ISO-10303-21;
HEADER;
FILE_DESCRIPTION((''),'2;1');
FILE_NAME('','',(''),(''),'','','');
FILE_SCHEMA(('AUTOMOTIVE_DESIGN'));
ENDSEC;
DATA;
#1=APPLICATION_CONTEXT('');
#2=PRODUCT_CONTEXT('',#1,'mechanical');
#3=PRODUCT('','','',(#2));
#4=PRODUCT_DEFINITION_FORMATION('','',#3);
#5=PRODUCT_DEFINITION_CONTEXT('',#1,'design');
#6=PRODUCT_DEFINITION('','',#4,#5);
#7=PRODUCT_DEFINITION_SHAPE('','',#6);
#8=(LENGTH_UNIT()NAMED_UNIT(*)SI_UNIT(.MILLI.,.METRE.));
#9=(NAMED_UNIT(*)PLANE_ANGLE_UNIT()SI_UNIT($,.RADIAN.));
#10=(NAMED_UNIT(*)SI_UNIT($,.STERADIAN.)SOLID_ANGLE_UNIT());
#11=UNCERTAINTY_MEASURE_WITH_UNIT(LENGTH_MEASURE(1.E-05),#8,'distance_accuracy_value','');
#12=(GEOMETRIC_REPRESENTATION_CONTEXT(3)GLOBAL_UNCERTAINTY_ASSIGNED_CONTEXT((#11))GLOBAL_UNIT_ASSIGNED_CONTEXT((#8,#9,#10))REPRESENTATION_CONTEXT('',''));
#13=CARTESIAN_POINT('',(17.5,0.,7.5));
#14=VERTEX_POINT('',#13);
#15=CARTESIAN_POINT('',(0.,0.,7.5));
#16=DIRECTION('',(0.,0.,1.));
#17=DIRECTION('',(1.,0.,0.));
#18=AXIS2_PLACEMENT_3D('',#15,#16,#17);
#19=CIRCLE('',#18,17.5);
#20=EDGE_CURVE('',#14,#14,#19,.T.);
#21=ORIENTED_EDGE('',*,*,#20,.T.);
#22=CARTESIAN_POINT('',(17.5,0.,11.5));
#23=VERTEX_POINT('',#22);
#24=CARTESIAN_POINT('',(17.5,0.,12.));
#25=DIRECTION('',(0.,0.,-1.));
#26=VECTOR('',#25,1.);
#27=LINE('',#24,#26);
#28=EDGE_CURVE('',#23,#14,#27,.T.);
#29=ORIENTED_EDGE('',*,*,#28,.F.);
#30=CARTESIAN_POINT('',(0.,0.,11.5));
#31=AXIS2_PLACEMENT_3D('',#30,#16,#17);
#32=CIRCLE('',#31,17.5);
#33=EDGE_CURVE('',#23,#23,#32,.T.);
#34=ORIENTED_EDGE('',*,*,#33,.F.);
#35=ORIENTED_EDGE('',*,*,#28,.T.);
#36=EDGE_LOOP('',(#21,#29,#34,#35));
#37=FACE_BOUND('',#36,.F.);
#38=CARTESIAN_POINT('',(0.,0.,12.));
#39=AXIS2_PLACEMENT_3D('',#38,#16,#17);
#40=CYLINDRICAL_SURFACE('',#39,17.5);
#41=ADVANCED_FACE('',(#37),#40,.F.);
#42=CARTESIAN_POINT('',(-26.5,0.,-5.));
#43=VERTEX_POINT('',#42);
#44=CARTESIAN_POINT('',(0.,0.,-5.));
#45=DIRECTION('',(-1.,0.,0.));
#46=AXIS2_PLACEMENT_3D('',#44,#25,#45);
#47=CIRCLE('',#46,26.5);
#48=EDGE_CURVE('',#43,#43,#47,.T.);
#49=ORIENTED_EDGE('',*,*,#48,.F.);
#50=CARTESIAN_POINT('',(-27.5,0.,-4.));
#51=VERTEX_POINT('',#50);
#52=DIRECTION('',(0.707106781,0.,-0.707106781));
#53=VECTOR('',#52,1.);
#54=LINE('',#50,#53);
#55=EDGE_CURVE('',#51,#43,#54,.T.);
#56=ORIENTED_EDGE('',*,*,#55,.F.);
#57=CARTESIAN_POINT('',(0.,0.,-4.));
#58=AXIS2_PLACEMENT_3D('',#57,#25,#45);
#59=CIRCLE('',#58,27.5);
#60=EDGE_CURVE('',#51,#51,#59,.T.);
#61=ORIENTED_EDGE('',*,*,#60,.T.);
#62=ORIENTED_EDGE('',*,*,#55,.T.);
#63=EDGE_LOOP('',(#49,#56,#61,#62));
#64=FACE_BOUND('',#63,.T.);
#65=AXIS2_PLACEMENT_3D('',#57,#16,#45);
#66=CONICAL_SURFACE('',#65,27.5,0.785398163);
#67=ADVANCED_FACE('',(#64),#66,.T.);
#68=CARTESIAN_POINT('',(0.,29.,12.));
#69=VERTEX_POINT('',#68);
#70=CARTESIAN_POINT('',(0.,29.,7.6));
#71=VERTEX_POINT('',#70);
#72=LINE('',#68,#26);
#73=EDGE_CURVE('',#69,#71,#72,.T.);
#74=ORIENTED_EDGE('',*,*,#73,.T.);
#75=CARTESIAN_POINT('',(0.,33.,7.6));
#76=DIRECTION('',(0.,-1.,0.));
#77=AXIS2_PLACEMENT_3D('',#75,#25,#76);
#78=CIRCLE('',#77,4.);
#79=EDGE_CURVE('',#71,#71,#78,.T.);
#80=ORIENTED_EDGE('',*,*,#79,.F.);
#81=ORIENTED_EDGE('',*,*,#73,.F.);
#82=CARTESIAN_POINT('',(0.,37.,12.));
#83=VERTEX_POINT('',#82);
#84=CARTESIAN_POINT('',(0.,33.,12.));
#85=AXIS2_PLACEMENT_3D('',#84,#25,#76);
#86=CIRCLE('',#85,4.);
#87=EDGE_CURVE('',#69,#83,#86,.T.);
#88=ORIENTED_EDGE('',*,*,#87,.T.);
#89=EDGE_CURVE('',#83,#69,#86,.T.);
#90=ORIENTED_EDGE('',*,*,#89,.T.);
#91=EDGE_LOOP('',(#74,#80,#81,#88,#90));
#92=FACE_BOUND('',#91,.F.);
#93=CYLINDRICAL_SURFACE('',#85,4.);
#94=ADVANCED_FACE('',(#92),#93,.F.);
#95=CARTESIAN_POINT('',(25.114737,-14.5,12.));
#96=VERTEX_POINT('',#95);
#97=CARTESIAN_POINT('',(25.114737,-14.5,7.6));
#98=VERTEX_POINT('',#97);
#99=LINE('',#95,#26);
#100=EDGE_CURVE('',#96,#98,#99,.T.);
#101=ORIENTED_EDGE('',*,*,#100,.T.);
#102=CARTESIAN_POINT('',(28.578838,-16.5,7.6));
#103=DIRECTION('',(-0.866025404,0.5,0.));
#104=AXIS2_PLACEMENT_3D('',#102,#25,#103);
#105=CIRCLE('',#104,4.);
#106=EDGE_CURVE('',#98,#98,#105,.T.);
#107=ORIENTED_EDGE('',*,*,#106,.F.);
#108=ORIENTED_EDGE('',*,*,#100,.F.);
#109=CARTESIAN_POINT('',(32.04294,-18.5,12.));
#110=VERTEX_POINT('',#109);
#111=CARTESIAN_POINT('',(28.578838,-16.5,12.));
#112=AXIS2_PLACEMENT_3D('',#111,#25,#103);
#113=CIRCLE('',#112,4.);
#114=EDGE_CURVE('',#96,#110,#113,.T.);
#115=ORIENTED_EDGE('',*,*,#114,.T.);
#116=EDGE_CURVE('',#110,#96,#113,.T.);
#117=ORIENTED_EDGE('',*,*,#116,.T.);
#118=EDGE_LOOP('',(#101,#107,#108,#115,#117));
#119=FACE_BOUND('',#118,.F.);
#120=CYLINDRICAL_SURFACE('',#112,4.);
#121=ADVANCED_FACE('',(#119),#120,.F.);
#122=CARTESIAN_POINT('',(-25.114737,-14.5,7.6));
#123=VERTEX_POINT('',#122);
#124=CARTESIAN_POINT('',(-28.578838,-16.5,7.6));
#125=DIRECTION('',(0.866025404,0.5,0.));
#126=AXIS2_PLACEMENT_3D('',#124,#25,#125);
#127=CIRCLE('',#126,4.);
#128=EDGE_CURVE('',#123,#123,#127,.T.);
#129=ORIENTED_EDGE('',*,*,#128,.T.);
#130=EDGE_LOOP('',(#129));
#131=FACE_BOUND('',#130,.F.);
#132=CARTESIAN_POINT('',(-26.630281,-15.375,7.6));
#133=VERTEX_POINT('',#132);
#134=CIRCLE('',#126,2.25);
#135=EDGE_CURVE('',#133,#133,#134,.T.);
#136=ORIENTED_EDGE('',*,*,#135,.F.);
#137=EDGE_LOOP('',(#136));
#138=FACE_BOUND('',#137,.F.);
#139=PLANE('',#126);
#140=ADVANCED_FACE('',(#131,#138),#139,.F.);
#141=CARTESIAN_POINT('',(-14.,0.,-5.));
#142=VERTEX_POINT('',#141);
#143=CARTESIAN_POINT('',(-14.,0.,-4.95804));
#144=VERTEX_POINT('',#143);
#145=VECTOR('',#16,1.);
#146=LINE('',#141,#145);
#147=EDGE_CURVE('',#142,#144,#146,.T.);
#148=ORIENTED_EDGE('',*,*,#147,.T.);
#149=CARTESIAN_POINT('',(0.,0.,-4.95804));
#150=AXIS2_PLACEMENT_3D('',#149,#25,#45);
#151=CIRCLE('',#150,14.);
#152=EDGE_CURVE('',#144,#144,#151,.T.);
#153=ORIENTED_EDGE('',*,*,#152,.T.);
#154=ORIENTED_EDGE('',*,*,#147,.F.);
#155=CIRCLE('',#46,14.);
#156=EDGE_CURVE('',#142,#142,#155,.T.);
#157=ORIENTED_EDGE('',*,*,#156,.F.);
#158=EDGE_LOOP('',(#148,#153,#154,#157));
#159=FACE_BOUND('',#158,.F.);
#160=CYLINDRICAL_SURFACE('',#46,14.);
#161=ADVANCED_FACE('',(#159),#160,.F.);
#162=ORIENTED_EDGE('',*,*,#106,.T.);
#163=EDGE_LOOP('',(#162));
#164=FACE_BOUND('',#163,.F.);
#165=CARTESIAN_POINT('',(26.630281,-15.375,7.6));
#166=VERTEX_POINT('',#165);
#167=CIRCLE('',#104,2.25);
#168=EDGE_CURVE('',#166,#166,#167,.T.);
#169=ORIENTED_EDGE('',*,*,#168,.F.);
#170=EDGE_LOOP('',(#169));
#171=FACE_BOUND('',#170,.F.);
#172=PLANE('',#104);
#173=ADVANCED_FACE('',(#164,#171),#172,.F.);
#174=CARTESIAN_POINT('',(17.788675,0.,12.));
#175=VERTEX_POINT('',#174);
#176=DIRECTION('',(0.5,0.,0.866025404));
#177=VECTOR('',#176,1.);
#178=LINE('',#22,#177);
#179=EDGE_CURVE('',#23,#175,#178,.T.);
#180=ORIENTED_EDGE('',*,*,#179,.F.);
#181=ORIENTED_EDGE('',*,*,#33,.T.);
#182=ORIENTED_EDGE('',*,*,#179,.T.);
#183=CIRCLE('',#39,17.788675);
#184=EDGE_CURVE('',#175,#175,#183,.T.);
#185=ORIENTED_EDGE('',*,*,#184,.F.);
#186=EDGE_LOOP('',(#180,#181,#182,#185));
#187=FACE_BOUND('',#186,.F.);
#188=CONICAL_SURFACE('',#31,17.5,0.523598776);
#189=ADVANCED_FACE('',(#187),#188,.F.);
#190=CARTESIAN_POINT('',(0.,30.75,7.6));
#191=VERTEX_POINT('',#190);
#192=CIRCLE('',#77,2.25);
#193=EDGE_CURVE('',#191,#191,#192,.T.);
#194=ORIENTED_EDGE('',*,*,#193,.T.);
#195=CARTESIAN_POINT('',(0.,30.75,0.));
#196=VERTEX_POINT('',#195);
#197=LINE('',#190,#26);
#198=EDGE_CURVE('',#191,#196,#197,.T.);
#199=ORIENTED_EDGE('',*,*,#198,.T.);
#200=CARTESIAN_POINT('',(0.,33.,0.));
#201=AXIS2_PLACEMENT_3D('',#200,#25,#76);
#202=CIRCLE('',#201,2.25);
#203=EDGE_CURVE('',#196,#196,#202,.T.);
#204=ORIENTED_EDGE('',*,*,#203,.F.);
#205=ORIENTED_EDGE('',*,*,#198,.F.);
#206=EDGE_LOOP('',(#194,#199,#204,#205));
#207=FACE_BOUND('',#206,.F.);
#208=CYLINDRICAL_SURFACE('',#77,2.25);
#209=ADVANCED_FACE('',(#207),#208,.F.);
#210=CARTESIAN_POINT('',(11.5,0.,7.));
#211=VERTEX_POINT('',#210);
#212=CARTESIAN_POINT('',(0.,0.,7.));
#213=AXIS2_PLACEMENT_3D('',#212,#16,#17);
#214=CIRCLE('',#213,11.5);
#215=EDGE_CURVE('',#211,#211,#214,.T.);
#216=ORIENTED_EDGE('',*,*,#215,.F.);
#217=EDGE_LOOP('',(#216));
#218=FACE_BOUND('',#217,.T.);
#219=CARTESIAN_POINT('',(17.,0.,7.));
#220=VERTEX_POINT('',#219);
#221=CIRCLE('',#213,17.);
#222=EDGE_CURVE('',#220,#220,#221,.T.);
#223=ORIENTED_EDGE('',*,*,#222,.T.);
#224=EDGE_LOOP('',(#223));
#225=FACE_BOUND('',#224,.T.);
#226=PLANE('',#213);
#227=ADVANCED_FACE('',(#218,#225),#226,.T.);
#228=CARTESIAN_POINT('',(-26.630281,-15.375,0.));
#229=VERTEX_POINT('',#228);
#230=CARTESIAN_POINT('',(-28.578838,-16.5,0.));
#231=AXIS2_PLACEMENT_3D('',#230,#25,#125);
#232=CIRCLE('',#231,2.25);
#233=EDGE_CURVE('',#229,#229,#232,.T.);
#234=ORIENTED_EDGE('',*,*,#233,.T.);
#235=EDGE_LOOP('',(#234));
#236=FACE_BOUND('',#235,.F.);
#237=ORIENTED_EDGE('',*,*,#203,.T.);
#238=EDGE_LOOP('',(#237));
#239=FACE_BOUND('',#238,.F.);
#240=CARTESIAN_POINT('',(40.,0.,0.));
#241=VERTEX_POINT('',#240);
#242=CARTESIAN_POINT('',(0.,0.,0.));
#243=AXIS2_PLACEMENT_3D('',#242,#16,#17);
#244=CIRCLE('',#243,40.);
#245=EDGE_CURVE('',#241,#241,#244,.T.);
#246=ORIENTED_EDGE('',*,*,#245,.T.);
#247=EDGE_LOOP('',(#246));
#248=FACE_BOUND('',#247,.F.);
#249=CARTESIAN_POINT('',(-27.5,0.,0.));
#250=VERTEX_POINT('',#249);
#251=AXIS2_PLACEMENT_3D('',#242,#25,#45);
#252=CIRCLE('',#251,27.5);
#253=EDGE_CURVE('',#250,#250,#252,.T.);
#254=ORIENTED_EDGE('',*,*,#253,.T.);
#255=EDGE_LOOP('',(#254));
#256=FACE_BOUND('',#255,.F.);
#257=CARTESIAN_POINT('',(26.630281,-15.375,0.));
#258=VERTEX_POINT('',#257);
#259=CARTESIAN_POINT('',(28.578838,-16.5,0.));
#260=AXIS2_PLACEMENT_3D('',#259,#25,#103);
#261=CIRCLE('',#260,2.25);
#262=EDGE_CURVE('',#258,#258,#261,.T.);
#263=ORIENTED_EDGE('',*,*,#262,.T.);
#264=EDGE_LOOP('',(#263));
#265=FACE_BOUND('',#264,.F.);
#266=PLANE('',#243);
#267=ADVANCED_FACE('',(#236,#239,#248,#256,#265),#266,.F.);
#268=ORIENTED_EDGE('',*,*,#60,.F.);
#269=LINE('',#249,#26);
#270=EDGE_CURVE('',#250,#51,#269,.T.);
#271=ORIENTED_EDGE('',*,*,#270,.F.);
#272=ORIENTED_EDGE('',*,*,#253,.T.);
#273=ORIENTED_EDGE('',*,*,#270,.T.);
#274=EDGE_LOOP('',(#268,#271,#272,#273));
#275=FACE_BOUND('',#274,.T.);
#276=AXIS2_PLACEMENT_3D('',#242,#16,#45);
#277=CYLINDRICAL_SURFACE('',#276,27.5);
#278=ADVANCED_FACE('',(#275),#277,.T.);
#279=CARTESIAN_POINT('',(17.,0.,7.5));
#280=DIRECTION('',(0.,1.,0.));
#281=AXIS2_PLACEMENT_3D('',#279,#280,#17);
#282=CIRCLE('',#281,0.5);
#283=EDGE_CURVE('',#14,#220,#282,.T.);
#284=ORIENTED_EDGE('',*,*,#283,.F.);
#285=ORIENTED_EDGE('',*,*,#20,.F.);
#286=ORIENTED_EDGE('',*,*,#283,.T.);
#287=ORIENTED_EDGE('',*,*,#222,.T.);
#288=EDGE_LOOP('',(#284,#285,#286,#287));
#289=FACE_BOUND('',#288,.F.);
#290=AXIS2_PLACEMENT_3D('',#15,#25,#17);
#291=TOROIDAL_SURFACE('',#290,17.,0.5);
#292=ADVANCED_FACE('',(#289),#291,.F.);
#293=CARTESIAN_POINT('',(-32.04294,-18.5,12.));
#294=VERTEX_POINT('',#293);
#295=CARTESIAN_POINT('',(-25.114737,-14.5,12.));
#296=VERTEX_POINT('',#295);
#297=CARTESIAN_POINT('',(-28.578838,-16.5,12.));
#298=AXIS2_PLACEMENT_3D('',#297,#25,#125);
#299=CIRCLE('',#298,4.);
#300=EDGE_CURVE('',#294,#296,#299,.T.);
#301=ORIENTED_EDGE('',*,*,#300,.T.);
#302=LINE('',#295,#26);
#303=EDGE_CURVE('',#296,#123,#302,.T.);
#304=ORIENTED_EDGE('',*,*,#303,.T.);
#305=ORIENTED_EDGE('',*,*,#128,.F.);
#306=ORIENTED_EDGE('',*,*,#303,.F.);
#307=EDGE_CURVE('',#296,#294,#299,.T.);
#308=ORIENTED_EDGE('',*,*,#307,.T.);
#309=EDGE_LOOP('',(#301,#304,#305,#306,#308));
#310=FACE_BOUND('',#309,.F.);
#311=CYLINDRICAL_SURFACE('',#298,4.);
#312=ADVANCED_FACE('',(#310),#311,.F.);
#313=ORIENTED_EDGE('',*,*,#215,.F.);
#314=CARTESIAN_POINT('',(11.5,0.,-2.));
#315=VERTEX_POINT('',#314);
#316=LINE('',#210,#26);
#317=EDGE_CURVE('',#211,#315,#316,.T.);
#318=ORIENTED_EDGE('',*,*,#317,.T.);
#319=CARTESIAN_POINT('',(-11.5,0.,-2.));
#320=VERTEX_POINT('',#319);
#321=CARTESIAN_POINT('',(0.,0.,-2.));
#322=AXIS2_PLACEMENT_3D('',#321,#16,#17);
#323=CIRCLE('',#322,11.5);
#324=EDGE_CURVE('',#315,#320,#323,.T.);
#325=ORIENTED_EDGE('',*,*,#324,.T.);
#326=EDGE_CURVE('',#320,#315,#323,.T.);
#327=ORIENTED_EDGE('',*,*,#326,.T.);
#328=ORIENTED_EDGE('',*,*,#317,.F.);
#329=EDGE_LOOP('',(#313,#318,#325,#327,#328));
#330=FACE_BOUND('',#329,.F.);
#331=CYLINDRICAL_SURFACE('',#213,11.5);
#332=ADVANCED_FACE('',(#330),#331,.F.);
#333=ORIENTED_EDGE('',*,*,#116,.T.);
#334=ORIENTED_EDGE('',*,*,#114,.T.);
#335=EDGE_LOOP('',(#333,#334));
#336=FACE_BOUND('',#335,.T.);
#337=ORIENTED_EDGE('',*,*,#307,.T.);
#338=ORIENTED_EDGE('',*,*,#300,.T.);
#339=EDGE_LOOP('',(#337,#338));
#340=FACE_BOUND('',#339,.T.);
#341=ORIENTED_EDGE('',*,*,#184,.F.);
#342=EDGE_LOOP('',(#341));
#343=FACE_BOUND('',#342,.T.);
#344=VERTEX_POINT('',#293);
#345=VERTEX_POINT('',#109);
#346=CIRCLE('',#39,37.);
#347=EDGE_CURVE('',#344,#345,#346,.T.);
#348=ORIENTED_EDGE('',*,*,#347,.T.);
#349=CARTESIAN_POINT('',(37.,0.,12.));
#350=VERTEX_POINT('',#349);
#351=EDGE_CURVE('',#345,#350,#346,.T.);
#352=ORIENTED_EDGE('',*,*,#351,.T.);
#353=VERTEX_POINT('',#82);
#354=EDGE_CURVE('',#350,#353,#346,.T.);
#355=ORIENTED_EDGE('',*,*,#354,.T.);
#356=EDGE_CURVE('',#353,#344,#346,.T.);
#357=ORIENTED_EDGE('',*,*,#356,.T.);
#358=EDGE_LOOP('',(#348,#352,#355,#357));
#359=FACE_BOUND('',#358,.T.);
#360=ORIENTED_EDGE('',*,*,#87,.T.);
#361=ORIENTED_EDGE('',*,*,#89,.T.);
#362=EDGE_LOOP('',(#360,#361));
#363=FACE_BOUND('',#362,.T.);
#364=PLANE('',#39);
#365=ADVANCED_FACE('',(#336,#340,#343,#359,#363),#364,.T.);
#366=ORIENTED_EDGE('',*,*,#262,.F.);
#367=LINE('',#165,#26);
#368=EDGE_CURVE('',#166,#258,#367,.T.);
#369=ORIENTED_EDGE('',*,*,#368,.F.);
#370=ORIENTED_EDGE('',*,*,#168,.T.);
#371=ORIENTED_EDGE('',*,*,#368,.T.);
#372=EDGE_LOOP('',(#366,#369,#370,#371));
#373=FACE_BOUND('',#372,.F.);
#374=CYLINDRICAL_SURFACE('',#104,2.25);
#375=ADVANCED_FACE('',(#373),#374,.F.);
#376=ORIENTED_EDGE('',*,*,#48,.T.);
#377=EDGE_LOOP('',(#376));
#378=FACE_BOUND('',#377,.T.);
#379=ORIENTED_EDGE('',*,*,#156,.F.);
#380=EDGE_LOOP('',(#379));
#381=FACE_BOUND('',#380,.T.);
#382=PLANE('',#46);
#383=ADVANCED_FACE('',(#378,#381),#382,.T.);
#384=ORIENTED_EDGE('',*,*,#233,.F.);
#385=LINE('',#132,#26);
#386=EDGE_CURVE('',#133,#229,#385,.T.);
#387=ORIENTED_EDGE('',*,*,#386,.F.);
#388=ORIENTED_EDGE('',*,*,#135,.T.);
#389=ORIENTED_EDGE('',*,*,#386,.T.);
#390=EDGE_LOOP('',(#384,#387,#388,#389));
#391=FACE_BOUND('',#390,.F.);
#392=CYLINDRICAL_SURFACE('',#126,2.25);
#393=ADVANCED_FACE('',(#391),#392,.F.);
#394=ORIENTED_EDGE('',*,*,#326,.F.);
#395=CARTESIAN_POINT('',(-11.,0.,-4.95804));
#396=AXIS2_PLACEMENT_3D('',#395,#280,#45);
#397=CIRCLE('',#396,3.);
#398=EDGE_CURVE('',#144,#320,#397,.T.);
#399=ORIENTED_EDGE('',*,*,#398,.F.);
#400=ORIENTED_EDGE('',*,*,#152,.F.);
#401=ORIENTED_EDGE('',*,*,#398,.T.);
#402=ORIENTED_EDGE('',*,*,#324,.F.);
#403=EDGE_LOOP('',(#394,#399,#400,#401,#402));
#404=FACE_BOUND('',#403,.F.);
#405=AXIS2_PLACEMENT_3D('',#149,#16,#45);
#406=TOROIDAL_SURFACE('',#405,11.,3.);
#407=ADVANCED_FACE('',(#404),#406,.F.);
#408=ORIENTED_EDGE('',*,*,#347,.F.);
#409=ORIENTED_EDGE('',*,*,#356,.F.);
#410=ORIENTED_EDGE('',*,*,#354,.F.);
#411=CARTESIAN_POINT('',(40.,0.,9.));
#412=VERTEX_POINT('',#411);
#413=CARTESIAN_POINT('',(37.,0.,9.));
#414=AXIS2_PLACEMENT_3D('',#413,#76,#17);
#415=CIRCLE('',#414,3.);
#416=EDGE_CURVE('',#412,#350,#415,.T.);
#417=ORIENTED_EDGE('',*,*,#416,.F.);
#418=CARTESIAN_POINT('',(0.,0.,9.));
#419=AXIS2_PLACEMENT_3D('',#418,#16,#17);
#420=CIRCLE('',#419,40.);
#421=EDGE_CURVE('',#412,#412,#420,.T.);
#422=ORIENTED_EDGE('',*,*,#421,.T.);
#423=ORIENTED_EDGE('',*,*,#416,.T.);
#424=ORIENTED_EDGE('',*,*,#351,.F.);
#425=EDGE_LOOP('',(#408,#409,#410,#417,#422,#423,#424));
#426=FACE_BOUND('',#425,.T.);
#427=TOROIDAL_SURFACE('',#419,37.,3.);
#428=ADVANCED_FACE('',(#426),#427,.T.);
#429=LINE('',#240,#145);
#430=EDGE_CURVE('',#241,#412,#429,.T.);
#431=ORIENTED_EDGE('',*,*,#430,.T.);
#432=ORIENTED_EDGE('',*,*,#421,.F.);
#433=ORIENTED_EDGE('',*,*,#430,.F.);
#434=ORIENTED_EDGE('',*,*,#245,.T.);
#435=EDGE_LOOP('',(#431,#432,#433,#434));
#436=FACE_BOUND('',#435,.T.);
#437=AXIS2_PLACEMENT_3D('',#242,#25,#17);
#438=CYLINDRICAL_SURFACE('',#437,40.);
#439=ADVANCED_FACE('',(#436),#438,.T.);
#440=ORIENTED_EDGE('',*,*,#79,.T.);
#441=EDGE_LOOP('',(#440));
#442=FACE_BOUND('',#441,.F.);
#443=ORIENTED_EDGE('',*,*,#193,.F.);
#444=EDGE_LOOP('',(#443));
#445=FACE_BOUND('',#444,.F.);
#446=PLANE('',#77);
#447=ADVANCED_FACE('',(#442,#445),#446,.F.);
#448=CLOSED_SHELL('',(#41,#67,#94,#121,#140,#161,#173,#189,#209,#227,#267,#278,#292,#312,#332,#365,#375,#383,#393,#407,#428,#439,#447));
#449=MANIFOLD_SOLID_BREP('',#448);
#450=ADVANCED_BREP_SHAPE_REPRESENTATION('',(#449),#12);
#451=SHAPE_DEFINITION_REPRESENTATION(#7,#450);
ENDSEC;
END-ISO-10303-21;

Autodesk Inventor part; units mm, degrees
ref_plane "YZ Plane" through (0, 0, 0) normal (1, 0, 0) x (0, 1, 0)
ref_plane "XZ Plane" through (0, 0, 0) normal (0, 1, 0) x (-1, 0, 0)
ref_plane "XY Plane" through (0, 0, 0) normal (0, 0, 1) x (1, 0, 0)
sketch "스케치4" plane through (0, 0, 0) normal (0, 0, 1) x (1, 0, 0)
  circle A0 centre (0, 0) radius 40
  dimension "d28" = 80
extrude "돌출4" add sketch "스케치4" along normal blind 12
sketch "스케치6" plane through (0, 0, 0) normal (0, 0, -1) x (-1, 0, 0)
  circle A0 centre (0, 0) radius 27.5
  dimension "d34" = 55
extrude "돌출6" add sketch "스케치6" along normal blind 5
sketch "스케치9" plane through (0, 0, -5) normal (0, 0, -1) x (-1, 0, 0)
  circle A0 centre (0, 0) radius 14
  dimension "d44" = 28
extrude "돌출9" cut sketch "스케치9" against normal blind 3
sketch "스케치12" plane through (0, 0, 12) normal (0, 0, 1) x (1, 0, 0)
  circle A0 centre (0, 33) radius 3
  point P0 (0, 0)
  dimension "d61" = 6
  dimension "d62" = 33
hole "구멍1" at (0, 33, 12) direction (0, 0, -1) diameter 4.5 end through all counterbore diameter 8 counterbore depth 4.4
sketch "스케치13" plane through (0, 0, 12) normal (0, 0, 1) x (1, 0, 0)
  circle A0 centre (0, 0) radius 17.5
  dimension "d74" = 35
extrude "돌출11" cut sketch "스케치13" against normal blind 5
sketch "스케치14" plane through (0, 0, 7) normal (0, 0, 1) x (1, 0, 0)
  circle A0 centre (0, 0) radius 11.5
  dimension "d77" = 23
extrude "돌출12" cut sketch "스케치14" against normal up to next
pattern_circular "원형 패턴3" count 3 over 360 about axis through (0, 0, 7) along (0, 0, -1) of "구멍1"
fillet "모깎기3" radius 3 2 edges at (-40, 0, 12) (14, 0, -2)
chamfer "모따기5" distance 1 angle 45 1 edges at (27.5, 0, -5)
fillet "모깎기4" radius 0.5 1 edges at (-17.5, 0, 7)
chamfer "모따기6" distance 0.5 angle 30 1 edges at (-17.5, 0, 12) measured on face at (17.4433, -1.4082, 9)
properties part number "도면3-2번"
